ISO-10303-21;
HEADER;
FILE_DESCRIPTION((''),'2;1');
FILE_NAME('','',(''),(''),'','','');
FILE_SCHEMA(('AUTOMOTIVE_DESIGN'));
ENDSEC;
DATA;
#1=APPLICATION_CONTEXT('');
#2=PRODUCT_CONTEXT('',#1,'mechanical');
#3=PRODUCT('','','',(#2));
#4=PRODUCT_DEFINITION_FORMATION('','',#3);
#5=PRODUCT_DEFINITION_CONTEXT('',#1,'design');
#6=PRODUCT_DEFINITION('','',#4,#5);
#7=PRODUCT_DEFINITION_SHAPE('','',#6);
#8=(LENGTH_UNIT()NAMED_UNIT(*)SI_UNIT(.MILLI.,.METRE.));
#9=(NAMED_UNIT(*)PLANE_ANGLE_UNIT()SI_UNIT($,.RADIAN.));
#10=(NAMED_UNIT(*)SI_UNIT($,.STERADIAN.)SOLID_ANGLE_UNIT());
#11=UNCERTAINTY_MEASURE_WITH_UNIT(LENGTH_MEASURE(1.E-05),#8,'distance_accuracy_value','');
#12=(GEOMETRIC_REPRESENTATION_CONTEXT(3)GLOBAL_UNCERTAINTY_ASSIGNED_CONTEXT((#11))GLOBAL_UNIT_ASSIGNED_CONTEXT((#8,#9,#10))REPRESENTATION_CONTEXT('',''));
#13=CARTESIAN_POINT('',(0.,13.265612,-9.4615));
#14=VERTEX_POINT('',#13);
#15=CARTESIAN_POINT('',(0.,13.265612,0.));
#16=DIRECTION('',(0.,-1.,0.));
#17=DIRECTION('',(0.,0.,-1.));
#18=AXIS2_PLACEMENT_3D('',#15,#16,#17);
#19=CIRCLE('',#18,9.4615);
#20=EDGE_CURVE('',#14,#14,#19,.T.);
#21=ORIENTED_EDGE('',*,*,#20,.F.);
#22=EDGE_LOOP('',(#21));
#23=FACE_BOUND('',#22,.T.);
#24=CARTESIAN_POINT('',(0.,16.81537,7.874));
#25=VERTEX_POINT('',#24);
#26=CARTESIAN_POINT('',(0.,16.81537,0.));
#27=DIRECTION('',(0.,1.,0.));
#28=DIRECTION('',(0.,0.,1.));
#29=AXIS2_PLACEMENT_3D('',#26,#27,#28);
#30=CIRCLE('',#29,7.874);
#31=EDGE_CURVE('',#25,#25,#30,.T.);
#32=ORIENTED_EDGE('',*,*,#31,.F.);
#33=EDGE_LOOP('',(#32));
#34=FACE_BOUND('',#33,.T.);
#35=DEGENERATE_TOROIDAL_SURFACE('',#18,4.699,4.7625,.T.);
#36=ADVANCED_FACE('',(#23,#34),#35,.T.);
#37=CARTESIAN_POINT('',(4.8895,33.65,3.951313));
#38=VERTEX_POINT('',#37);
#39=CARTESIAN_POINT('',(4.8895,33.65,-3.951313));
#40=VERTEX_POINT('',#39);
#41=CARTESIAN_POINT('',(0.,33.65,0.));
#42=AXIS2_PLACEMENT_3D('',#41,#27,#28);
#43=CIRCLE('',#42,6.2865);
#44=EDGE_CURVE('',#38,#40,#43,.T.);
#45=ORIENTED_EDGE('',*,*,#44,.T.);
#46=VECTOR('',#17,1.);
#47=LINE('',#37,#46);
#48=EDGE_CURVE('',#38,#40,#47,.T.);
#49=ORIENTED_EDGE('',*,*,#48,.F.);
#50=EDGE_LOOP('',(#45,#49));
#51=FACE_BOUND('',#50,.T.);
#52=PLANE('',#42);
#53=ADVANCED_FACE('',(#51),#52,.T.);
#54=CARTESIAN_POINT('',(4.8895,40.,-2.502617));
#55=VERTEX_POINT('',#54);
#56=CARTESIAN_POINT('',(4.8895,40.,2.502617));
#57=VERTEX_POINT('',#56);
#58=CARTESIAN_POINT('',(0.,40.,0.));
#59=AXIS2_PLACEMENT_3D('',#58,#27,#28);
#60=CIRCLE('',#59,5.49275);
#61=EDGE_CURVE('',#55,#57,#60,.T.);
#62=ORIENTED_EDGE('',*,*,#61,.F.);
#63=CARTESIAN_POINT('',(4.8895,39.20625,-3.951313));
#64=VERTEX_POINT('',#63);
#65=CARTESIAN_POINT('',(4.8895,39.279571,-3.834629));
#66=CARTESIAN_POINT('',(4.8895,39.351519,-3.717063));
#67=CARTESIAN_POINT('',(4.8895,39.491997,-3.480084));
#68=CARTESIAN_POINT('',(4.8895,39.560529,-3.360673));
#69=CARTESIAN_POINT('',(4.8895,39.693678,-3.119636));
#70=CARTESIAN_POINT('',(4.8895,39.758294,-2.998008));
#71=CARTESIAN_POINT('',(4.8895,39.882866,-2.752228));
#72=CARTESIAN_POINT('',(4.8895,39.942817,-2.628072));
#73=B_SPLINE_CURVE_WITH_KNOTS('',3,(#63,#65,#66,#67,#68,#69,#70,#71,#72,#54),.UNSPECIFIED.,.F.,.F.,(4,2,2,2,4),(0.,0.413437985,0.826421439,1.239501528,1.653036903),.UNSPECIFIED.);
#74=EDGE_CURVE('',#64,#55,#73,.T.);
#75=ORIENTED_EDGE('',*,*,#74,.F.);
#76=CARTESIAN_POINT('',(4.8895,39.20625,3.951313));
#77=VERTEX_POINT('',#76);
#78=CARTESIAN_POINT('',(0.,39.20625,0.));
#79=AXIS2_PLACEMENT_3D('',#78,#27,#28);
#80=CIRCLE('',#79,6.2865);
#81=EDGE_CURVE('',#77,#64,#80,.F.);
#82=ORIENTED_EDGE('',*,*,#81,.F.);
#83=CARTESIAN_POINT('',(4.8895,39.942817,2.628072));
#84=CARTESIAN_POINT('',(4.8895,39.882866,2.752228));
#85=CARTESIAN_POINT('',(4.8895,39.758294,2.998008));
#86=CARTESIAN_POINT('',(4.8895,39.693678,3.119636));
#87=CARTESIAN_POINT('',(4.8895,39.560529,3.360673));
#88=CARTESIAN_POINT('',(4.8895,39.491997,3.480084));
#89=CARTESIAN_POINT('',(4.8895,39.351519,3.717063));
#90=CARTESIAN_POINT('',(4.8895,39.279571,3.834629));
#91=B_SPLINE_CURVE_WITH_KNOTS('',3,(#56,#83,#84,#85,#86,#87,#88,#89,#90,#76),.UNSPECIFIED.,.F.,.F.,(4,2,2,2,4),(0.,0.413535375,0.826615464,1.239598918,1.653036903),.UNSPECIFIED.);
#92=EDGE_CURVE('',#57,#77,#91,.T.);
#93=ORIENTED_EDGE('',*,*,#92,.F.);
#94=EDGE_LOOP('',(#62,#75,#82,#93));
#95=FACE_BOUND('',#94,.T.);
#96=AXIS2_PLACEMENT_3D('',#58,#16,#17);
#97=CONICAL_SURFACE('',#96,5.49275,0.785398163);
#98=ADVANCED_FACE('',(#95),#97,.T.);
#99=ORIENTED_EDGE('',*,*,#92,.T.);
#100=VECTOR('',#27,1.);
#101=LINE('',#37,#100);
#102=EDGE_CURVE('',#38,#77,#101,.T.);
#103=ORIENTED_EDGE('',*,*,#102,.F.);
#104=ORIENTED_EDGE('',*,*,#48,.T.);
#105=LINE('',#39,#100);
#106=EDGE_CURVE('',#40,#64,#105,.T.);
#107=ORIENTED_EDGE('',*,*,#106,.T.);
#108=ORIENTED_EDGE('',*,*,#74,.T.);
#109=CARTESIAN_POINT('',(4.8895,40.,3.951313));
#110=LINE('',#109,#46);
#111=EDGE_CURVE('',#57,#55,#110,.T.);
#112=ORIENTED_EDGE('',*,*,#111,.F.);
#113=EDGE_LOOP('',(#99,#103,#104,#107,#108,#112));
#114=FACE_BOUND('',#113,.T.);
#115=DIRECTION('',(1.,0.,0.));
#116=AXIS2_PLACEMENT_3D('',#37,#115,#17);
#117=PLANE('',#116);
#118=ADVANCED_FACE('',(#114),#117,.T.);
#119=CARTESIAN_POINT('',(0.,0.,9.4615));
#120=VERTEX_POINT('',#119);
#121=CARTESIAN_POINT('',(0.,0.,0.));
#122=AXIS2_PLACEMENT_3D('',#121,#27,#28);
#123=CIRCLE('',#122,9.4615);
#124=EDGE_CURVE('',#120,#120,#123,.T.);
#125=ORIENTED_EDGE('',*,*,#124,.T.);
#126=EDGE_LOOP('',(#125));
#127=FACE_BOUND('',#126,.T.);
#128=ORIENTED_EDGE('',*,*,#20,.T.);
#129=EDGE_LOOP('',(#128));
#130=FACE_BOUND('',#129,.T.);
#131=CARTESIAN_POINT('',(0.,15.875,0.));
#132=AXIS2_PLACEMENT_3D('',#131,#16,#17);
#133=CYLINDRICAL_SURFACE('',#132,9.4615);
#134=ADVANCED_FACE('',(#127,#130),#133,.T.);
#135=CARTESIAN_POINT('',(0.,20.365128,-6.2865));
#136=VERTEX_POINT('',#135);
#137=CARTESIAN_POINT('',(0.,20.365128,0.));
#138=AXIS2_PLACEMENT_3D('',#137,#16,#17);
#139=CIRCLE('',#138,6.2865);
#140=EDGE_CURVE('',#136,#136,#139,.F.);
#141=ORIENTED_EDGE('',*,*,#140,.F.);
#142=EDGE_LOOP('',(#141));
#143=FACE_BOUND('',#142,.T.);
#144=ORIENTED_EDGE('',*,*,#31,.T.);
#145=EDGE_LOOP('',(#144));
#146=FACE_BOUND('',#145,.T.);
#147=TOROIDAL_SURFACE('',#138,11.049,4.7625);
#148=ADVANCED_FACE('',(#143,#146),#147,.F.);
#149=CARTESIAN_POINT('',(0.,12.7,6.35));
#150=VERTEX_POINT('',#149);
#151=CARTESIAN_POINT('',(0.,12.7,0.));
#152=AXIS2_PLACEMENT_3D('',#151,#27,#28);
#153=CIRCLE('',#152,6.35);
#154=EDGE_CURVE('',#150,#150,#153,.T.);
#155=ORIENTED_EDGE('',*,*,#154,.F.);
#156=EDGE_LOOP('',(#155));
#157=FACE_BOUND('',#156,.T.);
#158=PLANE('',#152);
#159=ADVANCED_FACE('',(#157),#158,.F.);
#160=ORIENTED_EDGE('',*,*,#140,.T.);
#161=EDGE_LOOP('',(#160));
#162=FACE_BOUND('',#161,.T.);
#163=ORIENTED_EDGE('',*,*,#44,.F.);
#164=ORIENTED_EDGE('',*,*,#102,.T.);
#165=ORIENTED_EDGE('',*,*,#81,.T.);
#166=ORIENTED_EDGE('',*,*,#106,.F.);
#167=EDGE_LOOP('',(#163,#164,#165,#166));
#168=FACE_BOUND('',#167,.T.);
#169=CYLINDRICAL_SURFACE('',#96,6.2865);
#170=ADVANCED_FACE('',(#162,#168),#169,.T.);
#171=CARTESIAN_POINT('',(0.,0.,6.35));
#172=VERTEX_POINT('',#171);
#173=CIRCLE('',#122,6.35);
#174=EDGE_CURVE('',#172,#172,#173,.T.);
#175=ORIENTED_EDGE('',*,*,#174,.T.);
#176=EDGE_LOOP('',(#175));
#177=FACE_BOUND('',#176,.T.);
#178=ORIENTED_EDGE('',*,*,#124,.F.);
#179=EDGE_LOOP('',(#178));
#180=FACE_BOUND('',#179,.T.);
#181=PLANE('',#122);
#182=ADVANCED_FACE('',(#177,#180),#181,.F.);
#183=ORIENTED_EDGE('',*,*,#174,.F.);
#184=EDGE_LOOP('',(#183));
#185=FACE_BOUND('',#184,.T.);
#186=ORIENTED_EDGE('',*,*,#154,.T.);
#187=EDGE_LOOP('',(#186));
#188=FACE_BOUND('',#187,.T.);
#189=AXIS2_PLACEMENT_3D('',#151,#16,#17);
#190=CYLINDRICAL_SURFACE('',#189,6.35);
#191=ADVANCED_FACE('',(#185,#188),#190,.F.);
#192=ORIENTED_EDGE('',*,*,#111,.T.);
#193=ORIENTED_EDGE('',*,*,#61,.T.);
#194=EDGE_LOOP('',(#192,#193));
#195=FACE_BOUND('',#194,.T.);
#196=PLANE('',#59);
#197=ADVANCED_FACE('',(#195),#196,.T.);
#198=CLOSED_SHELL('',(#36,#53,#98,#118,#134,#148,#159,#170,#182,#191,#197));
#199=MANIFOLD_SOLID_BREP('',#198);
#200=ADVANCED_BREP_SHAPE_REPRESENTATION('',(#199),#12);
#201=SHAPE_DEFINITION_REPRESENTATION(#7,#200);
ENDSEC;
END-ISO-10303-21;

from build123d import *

# Parameters (mm, degrees)
SKETCH1_R           = 6.2865
BASE_EXTRUDE_DEPTH  = 40
SKETCH3_R           = 9.4615
BOSS_EXTRUDE1_DEPTH = 15.875
SKETCH4_R           = 6.35
CUT_EXTRUDE1_DEPTH  = 12.7
FILLET1_R           = 4.7625
FILLET2_R           = 4.7625
CUT_EXTRUDE3_START  = -6.35
CUT_EXTRUDE3_DEPTH  = 6.35
CHAMFER1_SIZE       = 0.79375


with BuildPart() as part:
    # Sketch1 → Base-Extrude (new body)
    with BuildSketch(Plane(origin=(0, 0, 0), x_dir=(-1, 0, 0), z_dir=(0, 1, 0))):
        with Locations(Location((0, 0, 0), (0, 0, 90))):
            Circle(SKETCH1_R)
    extrude(amount=BASE_EXTRUDE_DEPTH)

    # Sketch3 → Boss-Extrude1 (add)
    with BuildSketch(Plane(origin=(0, 0, 0), x_dir=(-1, 0, 0), z_dir=(0, 1, 0))):
        with Locations(Location((0, 0, 0), (0, 0, 90))):
            Circle(SKETCH3_R)
    extrude(amount=BOSS_EXTRUDE1_DEPTH)

    # Sketch4 → Cut-Extrude1 (cut)
    with BuildSketch(Plane(origin=(0, 0, 0), x_dir=(-1, 0, 0), z_dir=(0, 1, 0))):
        with Locations(Location((0, 0, 0), (0, 0, 90))):
            Circle(SKETCH4_R)
    extrude(amount=CUT_EXTRUDE1_DEPTH, mode=Mode.SUBTRACT)

    # Fillet1
    # the kernel refuses this fillet: 4.7625 mm, written as the material it adds along each edge
    with BuildSketch(Plane(origin=(0, 15.875, 0), x_dir=(0, 0, 1), z_dir=(1, 0, 0))) as fillet1_piece_1:
        with BuildLine():
            CenterArc((11.049, -4.490128061), FILLET1_R, 109.471220634, 70.528779366)
            Line((6.2865, -4.490128061), (6.19125, -4.490128061))
            Line((6.19125, -4.490128061), (6.19125, 0))
            Line((6.19125, 0), (6.2865, 0.09525))
            ThreePointArc((6.2865, 0.09525), (7.874, 0.09525), (9.42975, 0.089802561))
            Line((9.42975, 0.089802561), (9.4615, 0))
        make_face()
    revolve(axis=Axis((0, 15.875, 0), (0, -1, 0)))

    # Fillet2
    fillet2_edges = [part.edges().sort_by_distance(p)[0] for p in [
        (0, 15.875, -9.4615),
    ]]
    fillet(fillet2_edges, radius=FILLET2_R)

    # Sketch7 → Cut-Extrude3 (cut)
    with BuildSketch(Plane(origin=(0, 40, 0), x_dir=(-1, 0, 0), z_dir=(0, 1, 0)).offset(CUT_EXTRUDE3_START)):
        with BuildLine():
            Line((-4.8895, 3.951312693), (-4.8895, -3.951312693))
            ThreePointArc((-4.8895, -3.951312693), (-6.2865, 0), (-4.8895, 3.951312693))
        make_face()
    extrude(amount=CUT_EXTRUDE3_DEPTH, mode=Mode.SUBTRACT)

    # Chamfer1
    chamfer1_edges = [part.edges().sort_by_distance(p)[0] for p in [
        (-5.67274226, 40, -2.70925774),
    ]]
    chamfer(chamfer1_edges, length=CHAMFER1_SIZE)


solid = part.part
